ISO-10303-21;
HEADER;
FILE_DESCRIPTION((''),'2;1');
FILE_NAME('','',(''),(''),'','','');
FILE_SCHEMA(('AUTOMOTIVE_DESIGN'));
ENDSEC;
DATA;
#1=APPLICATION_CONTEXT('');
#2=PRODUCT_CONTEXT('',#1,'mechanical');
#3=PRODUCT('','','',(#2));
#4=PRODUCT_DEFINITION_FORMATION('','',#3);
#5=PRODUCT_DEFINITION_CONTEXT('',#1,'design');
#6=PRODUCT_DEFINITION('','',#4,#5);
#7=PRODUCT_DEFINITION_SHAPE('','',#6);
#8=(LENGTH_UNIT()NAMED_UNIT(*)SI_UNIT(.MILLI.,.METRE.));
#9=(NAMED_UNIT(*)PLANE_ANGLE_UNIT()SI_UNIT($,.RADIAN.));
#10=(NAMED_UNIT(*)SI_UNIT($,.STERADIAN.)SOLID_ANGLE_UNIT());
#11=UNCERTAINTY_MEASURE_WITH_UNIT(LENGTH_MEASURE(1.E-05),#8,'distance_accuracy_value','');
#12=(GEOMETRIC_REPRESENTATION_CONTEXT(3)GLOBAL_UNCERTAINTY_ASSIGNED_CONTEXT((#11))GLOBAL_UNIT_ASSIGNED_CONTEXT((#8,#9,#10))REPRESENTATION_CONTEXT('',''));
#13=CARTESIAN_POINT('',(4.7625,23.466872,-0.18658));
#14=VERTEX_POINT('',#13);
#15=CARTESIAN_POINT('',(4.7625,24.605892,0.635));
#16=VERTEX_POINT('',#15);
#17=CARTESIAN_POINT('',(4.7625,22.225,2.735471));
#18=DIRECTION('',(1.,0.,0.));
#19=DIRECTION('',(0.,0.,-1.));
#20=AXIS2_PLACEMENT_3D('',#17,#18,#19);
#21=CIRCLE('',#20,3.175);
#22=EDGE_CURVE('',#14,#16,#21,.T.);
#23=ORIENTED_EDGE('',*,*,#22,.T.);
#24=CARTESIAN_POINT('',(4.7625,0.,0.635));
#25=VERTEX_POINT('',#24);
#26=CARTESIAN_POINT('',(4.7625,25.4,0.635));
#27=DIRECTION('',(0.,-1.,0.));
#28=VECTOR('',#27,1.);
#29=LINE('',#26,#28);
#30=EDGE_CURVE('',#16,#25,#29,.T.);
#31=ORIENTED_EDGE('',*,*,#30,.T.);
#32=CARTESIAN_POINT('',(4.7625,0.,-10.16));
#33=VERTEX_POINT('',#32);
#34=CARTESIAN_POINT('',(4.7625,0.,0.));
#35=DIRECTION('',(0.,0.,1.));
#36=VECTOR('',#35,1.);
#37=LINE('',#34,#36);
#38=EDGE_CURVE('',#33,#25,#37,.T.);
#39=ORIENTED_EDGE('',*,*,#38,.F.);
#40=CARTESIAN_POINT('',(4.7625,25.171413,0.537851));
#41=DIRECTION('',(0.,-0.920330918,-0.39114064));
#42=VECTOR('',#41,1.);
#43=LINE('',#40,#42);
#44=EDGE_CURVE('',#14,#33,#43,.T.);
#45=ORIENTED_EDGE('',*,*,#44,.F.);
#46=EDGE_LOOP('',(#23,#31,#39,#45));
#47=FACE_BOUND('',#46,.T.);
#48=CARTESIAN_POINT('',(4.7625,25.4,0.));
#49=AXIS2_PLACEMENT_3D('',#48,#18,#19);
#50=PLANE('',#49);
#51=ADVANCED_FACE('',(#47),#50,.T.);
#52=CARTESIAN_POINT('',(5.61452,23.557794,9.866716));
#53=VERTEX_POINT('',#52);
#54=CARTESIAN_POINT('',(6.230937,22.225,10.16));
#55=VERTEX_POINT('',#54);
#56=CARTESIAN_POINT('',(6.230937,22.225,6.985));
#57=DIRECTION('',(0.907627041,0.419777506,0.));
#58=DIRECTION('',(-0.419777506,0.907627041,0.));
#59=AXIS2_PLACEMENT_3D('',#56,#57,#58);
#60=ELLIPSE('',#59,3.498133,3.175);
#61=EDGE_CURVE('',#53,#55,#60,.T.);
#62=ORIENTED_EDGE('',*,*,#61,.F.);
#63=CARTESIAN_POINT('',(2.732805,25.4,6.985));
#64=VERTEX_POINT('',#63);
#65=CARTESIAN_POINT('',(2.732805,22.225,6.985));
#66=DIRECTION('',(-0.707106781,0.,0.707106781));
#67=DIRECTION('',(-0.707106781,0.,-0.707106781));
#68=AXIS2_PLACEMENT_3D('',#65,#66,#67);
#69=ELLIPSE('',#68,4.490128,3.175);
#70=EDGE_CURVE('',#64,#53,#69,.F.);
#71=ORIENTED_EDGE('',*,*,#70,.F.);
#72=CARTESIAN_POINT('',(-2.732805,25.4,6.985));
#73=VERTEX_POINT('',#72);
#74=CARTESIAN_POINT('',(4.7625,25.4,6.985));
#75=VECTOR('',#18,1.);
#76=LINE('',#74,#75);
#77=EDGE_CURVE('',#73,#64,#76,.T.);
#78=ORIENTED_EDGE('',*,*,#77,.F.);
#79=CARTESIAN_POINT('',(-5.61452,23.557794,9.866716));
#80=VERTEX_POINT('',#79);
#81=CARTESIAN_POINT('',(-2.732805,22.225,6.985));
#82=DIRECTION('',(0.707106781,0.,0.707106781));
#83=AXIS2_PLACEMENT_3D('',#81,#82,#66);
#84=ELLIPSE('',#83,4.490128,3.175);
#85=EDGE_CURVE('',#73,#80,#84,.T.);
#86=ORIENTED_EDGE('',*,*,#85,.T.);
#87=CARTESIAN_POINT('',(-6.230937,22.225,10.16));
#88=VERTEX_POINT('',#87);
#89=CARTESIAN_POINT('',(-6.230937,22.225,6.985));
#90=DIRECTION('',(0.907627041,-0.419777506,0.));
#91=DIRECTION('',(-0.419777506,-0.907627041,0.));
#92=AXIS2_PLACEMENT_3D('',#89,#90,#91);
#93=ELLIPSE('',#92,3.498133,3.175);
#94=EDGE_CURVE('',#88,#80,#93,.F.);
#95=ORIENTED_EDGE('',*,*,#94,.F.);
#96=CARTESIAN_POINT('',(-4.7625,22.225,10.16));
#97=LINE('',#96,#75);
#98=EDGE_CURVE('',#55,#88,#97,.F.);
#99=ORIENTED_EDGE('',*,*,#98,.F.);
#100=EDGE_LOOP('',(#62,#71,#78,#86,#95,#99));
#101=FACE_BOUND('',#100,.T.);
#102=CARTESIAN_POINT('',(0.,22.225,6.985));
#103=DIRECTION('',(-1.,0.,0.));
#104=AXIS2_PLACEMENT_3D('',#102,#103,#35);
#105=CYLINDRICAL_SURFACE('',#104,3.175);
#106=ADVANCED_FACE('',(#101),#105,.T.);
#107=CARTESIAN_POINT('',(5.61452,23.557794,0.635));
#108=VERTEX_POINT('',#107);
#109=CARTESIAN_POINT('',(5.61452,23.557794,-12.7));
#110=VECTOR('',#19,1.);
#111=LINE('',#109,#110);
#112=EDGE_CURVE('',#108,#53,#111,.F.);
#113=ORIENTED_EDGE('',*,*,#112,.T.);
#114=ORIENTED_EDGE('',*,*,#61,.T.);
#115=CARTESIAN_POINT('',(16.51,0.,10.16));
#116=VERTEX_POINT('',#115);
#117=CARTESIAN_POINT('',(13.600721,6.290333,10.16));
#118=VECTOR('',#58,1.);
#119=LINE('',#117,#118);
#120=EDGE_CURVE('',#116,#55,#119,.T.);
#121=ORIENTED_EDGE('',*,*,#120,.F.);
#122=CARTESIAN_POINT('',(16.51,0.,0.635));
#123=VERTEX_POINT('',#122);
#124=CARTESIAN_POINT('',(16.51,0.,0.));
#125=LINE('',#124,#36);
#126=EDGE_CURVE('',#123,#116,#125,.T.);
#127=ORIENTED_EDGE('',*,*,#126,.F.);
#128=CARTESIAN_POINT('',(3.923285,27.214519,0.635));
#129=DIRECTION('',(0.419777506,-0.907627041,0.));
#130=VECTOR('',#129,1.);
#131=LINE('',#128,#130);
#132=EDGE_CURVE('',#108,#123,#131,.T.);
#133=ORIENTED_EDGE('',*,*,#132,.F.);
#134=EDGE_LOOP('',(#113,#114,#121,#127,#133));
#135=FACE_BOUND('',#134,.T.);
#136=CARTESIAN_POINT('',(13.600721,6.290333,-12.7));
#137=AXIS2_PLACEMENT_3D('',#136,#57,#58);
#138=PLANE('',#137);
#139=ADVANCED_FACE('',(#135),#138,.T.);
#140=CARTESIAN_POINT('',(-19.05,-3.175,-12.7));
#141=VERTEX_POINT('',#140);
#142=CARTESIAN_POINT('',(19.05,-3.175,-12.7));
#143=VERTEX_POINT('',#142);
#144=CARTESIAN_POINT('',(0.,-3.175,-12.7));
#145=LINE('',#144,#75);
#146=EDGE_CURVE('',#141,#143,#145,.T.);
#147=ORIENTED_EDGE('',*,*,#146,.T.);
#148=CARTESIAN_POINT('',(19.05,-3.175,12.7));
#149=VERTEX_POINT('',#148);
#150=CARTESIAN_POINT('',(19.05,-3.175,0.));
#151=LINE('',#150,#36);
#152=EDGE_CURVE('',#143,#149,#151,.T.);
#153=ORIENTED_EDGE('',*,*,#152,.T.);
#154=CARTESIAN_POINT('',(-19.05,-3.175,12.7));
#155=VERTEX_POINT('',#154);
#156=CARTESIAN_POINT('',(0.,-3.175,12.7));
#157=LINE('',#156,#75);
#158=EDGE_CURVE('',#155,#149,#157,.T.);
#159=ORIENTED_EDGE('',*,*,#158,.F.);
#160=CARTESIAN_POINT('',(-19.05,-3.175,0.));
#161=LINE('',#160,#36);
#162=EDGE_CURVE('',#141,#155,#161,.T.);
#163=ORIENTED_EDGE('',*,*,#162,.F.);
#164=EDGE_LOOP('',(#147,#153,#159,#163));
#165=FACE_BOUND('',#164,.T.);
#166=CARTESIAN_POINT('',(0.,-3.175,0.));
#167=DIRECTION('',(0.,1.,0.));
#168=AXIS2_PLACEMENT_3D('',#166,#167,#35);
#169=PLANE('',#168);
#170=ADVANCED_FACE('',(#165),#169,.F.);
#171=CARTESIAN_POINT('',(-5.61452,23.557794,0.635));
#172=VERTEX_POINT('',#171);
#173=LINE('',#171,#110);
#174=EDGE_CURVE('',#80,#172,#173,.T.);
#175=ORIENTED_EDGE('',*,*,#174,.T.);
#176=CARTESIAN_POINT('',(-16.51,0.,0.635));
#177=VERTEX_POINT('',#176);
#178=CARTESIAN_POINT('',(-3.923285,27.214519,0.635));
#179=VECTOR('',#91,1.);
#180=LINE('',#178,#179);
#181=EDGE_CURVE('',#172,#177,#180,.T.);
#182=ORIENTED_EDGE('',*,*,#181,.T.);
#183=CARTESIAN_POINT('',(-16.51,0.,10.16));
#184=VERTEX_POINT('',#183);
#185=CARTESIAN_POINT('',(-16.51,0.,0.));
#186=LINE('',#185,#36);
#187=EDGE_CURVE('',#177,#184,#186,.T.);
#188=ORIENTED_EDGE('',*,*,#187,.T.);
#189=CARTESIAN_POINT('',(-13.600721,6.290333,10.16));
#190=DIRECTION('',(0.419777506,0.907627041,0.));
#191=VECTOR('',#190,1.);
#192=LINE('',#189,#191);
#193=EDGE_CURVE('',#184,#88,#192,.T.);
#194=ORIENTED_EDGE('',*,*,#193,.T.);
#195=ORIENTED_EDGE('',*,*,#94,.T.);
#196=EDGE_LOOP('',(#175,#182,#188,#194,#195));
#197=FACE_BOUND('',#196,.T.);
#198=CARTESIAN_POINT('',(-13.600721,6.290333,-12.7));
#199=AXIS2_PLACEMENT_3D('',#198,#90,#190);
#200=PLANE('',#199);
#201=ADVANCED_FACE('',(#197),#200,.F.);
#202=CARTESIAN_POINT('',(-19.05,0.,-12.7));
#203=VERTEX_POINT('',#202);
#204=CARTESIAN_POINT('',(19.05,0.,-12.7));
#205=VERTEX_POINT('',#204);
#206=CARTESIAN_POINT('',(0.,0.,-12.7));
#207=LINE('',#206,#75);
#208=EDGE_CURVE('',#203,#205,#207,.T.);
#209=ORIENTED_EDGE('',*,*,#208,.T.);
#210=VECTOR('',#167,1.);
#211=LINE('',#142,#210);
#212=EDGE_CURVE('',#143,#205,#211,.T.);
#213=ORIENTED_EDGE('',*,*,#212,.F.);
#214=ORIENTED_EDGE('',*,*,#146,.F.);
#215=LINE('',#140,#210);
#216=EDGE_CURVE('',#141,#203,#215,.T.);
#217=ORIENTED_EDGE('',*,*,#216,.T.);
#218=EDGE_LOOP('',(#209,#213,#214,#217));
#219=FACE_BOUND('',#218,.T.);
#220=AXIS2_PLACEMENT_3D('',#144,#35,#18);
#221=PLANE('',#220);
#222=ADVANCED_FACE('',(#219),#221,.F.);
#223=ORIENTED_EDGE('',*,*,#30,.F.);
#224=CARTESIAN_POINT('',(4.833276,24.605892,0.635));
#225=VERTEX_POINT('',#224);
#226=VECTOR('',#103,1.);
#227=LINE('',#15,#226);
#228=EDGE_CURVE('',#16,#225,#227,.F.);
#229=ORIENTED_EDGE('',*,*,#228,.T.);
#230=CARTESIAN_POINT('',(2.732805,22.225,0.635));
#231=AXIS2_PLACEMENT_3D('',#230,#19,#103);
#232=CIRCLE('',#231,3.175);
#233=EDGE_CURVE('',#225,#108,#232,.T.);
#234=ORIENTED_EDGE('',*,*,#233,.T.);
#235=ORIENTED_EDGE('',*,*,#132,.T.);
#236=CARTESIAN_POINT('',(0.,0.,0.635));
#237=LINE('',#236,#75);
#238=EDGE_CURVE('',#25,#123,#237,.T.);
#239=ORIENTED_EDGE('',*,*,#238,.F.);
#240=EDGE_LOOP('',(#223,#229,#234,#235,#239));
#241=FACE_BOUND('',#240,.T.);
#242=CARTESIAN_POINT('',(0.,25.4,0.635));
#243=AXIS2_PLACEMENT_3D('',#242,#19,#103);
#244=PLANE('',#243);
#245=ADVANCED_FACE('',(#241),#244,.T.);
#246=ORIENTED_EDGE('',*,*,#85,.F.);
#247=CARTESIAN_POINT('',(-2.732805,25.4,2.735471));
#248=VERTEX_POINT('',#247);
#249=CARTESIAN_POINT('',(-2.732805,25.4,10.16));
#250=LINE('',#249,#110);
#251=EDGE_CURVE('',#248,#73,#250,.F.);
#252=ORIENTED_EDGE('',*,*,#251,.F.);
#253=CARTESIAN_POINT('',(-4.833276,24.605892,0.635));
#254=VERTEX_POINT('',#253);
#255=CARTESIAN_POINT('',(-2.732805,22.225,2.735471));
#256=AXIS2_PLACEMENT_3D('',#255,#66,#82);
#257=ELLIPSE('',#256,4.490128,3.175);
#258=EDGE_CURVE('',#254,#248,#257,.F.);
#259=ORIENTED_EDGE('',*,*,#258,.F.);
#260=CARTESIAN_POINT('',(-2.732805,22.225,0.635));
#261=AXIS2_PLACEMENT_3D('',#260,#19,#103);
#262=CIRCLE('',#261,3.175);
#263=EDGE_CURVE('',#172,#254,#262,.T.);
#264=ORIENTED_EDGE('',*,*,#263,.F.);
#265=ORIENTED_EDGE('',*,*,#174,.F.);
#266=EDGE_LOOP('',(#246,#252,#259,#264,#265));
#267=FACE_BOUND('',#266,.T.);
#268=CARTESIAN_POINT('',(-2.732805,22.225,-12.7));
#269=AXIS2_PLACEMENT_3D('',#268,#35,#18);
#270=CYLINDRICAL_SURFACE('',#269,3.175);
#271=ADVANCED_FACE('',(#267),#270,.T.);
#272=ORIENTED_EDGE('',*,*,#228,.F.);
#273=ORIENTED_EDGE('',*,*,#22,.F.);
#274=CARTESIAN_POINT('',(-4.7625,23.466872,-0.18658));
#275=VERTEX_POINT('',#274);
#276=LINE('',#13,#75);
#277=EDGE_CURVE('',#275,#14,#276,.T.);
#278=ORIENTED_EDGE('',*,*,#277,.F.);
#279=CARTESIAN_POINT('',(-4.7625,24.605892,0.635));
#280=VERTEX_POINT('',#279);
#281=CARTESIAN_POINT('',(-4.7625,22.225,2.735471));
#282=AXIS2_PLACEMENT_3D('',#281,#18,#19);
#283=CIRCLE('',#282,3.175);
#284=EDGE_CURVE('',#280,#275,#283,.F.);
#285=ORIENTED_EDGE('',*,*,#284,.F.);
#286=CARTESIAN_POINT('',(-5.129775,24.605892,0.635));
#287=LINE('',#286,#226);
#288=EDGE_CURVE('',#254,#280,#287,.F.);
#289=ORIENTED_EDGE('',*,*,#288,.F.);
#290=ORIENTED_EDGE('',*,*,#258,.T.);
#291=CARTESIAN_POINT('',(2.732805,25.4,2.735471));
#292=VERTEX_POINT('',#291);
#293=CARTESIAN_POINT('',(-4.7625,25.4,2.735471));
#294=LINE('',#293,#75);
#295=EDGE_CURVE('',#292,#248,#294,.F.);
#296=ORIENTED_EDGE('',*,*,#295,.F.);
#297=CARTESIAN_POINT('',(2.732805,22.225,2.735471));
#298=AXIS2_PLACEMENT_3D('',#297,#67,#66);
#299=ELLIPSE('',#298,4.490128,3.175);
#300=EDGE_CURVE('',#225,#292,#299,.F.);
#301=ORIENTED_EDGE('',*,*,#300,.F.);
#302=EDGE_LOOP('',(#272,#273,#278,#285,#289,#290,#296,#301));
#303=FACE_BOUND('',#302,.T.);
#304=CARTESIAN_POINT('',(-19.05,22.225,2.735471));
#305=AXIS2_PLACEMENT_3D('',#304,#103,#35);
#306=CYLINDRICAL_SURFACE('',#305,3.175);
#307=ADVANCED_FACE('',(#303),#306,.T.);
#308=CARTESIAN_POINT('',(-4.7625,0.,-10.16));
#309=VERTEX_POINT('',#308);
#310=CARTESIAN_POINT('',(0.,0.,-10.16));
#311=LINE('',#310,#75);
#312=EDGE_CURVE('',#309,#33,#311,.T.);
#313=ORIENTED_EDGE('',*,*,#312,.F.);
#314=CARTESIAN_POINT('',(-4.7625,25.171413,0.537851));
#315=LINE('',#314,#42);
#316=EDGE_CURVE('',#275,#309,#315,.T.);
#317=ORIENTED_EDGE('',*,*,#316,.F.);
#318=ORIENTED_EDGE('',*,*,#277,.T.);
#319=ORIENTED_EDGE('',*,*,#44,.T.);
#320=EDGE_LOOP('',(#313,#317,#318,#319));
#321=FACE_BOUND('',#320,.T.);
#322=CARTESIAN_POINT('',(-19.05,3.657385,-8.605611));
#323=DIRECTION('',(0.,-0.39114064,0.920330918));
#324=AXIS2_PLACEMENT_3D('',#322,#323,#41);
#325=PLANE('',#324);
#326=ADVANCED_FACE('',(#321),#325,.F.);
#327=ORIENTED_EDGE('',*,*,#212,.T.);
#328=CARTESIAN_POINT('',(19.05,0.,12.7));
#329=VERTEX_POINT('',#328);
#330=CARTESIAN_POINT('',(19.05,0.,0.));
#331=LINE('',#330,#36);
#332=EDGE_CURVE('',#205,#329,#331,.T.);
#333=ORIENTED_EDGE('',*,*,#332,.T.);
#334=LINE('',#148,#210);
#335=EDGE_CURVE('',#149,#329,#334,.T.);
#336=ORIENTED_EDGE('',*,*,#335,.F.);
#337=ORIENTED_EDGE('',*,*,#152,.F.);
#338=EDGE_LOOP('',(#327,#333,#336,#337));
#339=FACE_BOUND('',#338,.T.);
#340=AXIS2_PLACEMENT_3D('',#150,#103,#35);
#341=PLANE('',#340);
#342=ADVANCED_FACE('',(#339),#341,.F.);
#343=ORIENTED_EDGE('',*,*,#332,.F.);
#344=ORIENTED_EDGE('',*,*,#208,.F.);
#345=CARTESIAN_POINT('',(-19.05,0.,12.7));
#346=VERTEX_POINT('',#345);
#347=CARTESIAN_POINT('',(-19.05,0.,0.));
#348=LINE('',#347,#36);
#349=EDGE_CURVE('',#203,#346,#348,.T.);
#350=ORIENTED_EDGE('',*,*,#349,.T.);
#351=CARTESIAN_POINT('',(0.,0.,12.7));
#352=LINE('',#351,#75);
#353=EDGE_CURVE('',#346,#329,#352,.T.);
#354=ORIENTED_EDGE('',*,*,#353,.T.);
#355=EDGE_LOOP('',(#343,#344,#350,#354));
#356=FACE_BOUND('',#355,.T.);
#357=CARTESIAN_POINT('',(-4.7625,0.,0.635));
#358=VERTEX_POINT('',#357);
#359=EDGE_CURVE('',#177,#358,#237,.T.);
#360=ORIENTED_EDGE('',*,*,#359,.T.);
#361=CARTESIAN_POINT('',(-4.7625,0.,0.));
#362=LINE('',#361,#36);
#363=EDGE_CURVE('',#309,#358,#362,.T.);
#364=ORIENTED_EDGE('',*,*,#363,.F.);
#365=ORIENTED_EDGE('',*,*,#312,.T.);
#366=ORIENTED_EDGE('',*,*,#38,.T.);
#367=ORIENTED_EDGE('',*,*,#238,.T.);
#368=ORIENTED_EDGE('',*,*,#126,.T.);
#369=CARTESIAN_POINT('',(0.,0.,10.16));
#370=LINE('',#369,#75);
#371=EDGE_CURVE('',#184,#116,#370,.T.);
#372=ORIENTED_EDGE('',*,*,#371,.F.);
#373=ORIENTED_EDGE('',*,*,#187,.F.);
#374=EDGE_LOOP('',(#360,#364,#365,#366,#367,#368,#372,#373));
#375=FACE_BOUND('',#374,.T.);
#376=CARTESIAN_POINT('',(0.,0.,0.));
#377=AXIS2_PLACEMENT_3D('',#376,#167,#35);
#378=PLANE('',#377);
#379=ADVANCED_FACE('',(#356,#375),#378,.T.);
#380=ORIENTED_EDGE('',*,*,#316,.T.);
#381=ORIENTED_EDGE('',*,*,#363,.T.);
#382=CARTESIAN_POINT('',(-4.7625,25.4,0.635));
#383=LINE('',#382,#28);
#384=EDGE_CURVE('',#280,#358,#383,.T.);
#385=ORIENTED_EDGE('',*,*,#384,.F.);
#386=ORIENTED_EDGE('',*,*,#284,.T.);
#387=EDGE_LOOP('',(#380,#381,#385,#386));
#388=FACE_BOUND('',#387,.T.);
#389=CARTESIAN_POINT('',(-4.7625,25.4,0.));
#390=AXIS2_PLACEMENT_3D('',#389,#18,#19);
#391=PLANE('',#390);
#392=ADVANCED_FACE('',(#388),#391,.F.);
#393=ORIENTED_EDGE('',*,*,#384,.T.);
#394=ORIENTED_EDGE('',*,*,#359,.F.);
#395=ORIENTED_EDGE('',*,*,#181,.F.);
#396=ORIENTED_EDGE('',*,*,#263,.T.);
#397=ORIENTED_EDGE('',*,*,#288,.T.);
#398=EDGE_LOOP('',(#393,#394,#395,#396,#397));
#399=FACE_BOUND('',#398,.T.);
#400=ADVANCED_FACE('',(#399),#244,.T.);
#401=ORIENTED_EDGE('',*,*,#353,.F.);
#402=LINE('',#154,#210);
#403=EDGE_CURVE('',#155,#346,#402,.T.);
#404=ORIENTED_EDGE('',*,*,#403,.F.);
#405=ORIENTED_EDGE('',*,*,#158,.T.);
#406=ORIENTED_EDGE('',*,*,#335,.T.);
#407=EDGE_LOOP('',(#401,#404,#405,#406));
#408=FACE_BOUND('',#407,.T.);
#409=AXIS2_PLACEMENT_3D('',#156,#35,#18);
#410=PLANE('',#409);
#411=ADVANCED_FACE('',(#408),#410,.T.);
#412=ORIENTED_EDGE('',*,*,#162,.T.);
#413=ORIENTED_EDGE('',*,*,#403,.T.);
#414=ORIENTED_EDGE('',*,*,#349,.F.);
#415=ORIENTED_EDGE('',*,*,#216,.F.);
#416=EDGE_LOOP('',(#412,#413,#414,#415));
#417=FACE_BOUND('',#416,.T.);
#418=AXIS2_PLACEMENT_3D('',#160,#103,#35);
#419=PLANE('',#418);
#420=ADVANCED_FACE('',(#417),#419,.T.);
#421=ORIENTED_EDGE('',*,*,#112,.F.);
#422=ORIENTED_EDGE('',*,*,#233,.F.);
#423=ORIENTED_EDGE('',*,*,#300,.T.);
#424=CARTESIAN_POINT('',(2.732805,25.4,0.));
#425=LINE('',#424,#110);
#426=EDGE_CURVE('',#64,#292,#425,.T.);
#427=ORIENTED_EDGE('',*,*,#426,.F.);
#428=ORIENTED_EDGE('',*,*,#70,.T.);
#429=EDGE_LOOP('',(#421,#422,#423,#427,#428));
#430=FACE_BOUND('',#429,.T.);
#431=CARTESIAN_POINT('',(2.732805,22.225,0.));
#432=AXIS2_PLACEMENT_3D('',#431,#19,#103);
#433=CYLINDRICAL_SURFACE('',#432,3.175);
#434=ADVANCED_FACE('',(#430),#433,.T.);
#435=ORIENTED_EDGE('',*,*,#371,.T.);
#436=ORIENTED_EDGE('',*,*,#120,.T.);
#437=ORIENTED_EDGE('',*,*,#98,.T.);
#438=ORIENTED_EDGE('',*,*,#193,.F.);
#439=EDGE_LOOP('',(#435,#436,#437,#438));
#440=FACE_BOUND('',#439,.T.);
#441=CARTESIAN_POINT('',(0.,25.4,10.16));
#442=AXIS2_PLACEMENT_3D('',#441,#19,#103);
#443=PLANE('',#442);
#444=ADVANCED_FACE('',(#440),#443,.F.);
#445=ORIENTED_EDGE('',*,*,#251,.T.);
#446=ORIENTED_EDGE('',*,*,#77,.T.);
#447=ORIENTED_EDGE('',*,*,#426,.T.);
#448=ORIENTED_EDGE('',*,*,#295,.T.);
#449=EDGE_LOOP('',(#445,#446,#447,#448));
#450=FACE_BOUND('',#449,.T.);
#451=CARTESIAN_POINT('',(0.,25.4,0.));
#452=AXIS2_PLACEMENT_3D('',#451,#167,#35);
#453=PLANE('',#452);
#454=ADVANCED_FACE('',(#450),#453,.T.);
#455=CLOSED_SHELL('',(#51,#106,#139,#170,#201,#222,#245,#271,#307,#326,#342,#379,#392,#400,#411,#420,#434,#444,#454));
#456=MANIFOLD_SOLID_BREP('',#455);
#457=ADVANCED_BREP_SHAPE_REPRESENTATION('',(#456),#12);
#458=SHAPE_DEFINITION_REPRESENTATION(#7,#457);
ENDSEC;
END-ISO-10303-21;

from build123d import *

# Parameters (mm, degrees)
SKETCH1_W               = 38.1
SKETCH1_H               = 25.4
SKETCH1_W_2             = 33.02
SKETCH1_H_2             = 20.32
SKETCH1_W_3             = 11.7475
SKETCH1_H_3             = 10.795
SKETCH1_W_4             = 9.525
BOSS_EXTRUDE1_DEPTH     = 3.175
SKETCH1_3_W             = 9.525
SKETCH1_3_H             = 10.795
BOSS_EXTRUDE2_DEPTH     = 25.4
CUT_EXTRUDE1_DEPTH      = 40.123421374
CUT_EXTRUDE2_DEPTH      = 38.060560658
CUT_EXTRUDE2_DEPTH_BACK = 38.060560658
FILLET7_R               = 3.175


with BuildPart() as part:
    # Sketch1 → Boss-Extrude1 (new body)
    # profile 1 of 5: a face of its own
    with BuildSketch(Plane(origin=(0, 0, 0), x_dir=(1, 0, 0), z_dir=(0, 1, 0))):
        Rectangle(SKETCH1_W, SKETCH1_H)
        Rectangle(SKETCH1_W_2, SKETCH1_H_2, mode=Mode.SUBTRACT)
    # profile 2 of 5: a face of its own
    with BuildSketch(Plane(origin=(0, 0, 0), x_dir=(1, 0, 0), z_dir=(0, 1, 0))):
        with Locations((-10.63625, 4.7625)):
            Rectangle(SKETCH1_W_3, SKETCH1_H_3)
    # profile 3 of 5: a face of its own
    with BuildSketch(Plane(origin=(0, 0, 0), x_dir=(1, 0, 0), z_dir=(0, 1, 0))):
        with Locations((10.63625, 4.7625)):
            Rectangle(SKETCH1_W_3, SKETCH1_H_3)
    # profile 4 of 5: a face of its own
    with BuildSketch(Plane(origin=(0, 0, 0), x_dir=(1, 0, 0), z_dir=(0, 1, 0))):
        with Locations((0, 4.7625)):
            Rectangle(SKETCH1_W_4, SKETCH1_H_3)
    # profile 5 of 5: a face of its own
    with BuildSketch(Plane(origin=(0, 0, 0), x_dir=(1, 0, 0), z_dir=(0, 1, 0))):
        Polygon((-4.7625, -0.635), (-16.51, -0.635), (-16.51, -10.16), (16.51, -10.16), (16.51, -0.635), (4.7625, -0.635), align=None)
    extrude(amount=-BOSS_EXTRUDE1_DEPTH)

    # Sketch1<3> → Boss-Extrude2 (add)
    with BuildSketch(Plane(origin=(0, 0, 0), x_dir=(1, 0, 0), z_dir=(0, 1, 0))):
        with Locations((0, 4.7625)):
            Rectangle(SKETCH1_3_W, SKETCH1_3_H)
        Polygon((-4.7625, -0.635), (-16.51, -0.635), (-16.51, -10.16), (16.51, -10.16), (16.51, -0.635), (4.7625, -0.635), align=None)
    extrude(amount=BOSS_EXTRUDE2_DEPTH)

    # Sketch2 → Cut-Extrude1 (cut, through all)
    with BuildSketch(Plane.XY.offset(10.16)):
        Polygon((-16.51, 25.4), (-16.51, 0), (-4.7625, 25.4), align=None)
        Polygon((4.7625, 25.4), (16.51, 0), (16.51, 25.4), align=None)
    extrude(amount=-CUT_EXTRUDE1_DEPTH, mode=Mode.SUBTRACT)

    # Sketch3 → Cut-Extrude2 (cut, two sides: drawn at the far end of the back side and taken through both)
    with BuildSketch(Plane(origin=(4.7625, 0, 0), x_dir=(0, 0, -1), z_dir=(1, 0, 0)).offset(-CUT_EXTRUDE2_DEPTH_BACK)):
        Polygon((-0.635, 25.4), (10.16, 0), (10.16, 25.4), align=None)
    extrude(amount=CUT_EXTRUDE2_DEPTH + CUT_EXTRUDE2_DEPTH_BACK, mode=Mode.SUBTRACT)

    # Fillet7
    # the kernel refuses this fillet: 3.175 mm, written as the material it takes off along each edge
    with BuildSketch(Plane(origin=(-12.7, 25.4, 10.16), x_dir=(0, 0, -1), z_dir=(1, 0, 0))) as fillet7_piece_1:
        with BuildLine():
            CenterArc((FILLET7_R, -FILLET7_R), FILLET7_R, 90, 90)
            Line((0, -FILLET7_R), (0, 0))
            Line((0, 0), (FILLET7_R, 0))
        make_face()
    extrude(amount=25.4, mode=Mode.SUBTRACT)
    with BuildSketch(Plane(origin=(-4.7625, 25.4, 15.234238466), x_dir=(1, 0, 0), z_dir=(0, 0, -1)), Plane(origin=(4.7625, 25.4, 15.234238466), x_dir=(0.4197775063604339, -0.9076270407793146, 0), z_dir=(0, 0, -1))) as fillet7_piece_2:
        with BuildLine():
            CenterArc((FILLET7_R * 0.639274137471, FILLET7_R), FILLET7_R, 204.820541335, 65.179458665)
            Line((-FILLET7_R * 0.268352903308, FILLET7_R * 0.58022249364), (0, 0))
            Line((0, 0), (FILLET7_R * 0.639274137471, 0))
        make_face()
    extrude(amount=19.673476932, mode=Mode.SUBTRACT)
    with BuildSketch(Plane(origin=(10.013677669, 25.4, 0.635), x_dir=(0, 0, 1), z_dir=(-1, 0, 0))) as fillet7_piece_3:
        with BuildLine():
            CenterArc((FILLET7_R * 0.661565690605, -FILLET7_R), FILLET7_R, 90, 66.974507991)
            Line((-FILLET7_R * 0.258765227853, -FILLET7_R * 0.608859359655), (0, 0))
            Line((0, 0), (FILLET7_R * 0.661565690605, 0))
        make_face()
    extrude(amount=20.027355338, mode=Mode.SUBTRACT)


solid = part.part
